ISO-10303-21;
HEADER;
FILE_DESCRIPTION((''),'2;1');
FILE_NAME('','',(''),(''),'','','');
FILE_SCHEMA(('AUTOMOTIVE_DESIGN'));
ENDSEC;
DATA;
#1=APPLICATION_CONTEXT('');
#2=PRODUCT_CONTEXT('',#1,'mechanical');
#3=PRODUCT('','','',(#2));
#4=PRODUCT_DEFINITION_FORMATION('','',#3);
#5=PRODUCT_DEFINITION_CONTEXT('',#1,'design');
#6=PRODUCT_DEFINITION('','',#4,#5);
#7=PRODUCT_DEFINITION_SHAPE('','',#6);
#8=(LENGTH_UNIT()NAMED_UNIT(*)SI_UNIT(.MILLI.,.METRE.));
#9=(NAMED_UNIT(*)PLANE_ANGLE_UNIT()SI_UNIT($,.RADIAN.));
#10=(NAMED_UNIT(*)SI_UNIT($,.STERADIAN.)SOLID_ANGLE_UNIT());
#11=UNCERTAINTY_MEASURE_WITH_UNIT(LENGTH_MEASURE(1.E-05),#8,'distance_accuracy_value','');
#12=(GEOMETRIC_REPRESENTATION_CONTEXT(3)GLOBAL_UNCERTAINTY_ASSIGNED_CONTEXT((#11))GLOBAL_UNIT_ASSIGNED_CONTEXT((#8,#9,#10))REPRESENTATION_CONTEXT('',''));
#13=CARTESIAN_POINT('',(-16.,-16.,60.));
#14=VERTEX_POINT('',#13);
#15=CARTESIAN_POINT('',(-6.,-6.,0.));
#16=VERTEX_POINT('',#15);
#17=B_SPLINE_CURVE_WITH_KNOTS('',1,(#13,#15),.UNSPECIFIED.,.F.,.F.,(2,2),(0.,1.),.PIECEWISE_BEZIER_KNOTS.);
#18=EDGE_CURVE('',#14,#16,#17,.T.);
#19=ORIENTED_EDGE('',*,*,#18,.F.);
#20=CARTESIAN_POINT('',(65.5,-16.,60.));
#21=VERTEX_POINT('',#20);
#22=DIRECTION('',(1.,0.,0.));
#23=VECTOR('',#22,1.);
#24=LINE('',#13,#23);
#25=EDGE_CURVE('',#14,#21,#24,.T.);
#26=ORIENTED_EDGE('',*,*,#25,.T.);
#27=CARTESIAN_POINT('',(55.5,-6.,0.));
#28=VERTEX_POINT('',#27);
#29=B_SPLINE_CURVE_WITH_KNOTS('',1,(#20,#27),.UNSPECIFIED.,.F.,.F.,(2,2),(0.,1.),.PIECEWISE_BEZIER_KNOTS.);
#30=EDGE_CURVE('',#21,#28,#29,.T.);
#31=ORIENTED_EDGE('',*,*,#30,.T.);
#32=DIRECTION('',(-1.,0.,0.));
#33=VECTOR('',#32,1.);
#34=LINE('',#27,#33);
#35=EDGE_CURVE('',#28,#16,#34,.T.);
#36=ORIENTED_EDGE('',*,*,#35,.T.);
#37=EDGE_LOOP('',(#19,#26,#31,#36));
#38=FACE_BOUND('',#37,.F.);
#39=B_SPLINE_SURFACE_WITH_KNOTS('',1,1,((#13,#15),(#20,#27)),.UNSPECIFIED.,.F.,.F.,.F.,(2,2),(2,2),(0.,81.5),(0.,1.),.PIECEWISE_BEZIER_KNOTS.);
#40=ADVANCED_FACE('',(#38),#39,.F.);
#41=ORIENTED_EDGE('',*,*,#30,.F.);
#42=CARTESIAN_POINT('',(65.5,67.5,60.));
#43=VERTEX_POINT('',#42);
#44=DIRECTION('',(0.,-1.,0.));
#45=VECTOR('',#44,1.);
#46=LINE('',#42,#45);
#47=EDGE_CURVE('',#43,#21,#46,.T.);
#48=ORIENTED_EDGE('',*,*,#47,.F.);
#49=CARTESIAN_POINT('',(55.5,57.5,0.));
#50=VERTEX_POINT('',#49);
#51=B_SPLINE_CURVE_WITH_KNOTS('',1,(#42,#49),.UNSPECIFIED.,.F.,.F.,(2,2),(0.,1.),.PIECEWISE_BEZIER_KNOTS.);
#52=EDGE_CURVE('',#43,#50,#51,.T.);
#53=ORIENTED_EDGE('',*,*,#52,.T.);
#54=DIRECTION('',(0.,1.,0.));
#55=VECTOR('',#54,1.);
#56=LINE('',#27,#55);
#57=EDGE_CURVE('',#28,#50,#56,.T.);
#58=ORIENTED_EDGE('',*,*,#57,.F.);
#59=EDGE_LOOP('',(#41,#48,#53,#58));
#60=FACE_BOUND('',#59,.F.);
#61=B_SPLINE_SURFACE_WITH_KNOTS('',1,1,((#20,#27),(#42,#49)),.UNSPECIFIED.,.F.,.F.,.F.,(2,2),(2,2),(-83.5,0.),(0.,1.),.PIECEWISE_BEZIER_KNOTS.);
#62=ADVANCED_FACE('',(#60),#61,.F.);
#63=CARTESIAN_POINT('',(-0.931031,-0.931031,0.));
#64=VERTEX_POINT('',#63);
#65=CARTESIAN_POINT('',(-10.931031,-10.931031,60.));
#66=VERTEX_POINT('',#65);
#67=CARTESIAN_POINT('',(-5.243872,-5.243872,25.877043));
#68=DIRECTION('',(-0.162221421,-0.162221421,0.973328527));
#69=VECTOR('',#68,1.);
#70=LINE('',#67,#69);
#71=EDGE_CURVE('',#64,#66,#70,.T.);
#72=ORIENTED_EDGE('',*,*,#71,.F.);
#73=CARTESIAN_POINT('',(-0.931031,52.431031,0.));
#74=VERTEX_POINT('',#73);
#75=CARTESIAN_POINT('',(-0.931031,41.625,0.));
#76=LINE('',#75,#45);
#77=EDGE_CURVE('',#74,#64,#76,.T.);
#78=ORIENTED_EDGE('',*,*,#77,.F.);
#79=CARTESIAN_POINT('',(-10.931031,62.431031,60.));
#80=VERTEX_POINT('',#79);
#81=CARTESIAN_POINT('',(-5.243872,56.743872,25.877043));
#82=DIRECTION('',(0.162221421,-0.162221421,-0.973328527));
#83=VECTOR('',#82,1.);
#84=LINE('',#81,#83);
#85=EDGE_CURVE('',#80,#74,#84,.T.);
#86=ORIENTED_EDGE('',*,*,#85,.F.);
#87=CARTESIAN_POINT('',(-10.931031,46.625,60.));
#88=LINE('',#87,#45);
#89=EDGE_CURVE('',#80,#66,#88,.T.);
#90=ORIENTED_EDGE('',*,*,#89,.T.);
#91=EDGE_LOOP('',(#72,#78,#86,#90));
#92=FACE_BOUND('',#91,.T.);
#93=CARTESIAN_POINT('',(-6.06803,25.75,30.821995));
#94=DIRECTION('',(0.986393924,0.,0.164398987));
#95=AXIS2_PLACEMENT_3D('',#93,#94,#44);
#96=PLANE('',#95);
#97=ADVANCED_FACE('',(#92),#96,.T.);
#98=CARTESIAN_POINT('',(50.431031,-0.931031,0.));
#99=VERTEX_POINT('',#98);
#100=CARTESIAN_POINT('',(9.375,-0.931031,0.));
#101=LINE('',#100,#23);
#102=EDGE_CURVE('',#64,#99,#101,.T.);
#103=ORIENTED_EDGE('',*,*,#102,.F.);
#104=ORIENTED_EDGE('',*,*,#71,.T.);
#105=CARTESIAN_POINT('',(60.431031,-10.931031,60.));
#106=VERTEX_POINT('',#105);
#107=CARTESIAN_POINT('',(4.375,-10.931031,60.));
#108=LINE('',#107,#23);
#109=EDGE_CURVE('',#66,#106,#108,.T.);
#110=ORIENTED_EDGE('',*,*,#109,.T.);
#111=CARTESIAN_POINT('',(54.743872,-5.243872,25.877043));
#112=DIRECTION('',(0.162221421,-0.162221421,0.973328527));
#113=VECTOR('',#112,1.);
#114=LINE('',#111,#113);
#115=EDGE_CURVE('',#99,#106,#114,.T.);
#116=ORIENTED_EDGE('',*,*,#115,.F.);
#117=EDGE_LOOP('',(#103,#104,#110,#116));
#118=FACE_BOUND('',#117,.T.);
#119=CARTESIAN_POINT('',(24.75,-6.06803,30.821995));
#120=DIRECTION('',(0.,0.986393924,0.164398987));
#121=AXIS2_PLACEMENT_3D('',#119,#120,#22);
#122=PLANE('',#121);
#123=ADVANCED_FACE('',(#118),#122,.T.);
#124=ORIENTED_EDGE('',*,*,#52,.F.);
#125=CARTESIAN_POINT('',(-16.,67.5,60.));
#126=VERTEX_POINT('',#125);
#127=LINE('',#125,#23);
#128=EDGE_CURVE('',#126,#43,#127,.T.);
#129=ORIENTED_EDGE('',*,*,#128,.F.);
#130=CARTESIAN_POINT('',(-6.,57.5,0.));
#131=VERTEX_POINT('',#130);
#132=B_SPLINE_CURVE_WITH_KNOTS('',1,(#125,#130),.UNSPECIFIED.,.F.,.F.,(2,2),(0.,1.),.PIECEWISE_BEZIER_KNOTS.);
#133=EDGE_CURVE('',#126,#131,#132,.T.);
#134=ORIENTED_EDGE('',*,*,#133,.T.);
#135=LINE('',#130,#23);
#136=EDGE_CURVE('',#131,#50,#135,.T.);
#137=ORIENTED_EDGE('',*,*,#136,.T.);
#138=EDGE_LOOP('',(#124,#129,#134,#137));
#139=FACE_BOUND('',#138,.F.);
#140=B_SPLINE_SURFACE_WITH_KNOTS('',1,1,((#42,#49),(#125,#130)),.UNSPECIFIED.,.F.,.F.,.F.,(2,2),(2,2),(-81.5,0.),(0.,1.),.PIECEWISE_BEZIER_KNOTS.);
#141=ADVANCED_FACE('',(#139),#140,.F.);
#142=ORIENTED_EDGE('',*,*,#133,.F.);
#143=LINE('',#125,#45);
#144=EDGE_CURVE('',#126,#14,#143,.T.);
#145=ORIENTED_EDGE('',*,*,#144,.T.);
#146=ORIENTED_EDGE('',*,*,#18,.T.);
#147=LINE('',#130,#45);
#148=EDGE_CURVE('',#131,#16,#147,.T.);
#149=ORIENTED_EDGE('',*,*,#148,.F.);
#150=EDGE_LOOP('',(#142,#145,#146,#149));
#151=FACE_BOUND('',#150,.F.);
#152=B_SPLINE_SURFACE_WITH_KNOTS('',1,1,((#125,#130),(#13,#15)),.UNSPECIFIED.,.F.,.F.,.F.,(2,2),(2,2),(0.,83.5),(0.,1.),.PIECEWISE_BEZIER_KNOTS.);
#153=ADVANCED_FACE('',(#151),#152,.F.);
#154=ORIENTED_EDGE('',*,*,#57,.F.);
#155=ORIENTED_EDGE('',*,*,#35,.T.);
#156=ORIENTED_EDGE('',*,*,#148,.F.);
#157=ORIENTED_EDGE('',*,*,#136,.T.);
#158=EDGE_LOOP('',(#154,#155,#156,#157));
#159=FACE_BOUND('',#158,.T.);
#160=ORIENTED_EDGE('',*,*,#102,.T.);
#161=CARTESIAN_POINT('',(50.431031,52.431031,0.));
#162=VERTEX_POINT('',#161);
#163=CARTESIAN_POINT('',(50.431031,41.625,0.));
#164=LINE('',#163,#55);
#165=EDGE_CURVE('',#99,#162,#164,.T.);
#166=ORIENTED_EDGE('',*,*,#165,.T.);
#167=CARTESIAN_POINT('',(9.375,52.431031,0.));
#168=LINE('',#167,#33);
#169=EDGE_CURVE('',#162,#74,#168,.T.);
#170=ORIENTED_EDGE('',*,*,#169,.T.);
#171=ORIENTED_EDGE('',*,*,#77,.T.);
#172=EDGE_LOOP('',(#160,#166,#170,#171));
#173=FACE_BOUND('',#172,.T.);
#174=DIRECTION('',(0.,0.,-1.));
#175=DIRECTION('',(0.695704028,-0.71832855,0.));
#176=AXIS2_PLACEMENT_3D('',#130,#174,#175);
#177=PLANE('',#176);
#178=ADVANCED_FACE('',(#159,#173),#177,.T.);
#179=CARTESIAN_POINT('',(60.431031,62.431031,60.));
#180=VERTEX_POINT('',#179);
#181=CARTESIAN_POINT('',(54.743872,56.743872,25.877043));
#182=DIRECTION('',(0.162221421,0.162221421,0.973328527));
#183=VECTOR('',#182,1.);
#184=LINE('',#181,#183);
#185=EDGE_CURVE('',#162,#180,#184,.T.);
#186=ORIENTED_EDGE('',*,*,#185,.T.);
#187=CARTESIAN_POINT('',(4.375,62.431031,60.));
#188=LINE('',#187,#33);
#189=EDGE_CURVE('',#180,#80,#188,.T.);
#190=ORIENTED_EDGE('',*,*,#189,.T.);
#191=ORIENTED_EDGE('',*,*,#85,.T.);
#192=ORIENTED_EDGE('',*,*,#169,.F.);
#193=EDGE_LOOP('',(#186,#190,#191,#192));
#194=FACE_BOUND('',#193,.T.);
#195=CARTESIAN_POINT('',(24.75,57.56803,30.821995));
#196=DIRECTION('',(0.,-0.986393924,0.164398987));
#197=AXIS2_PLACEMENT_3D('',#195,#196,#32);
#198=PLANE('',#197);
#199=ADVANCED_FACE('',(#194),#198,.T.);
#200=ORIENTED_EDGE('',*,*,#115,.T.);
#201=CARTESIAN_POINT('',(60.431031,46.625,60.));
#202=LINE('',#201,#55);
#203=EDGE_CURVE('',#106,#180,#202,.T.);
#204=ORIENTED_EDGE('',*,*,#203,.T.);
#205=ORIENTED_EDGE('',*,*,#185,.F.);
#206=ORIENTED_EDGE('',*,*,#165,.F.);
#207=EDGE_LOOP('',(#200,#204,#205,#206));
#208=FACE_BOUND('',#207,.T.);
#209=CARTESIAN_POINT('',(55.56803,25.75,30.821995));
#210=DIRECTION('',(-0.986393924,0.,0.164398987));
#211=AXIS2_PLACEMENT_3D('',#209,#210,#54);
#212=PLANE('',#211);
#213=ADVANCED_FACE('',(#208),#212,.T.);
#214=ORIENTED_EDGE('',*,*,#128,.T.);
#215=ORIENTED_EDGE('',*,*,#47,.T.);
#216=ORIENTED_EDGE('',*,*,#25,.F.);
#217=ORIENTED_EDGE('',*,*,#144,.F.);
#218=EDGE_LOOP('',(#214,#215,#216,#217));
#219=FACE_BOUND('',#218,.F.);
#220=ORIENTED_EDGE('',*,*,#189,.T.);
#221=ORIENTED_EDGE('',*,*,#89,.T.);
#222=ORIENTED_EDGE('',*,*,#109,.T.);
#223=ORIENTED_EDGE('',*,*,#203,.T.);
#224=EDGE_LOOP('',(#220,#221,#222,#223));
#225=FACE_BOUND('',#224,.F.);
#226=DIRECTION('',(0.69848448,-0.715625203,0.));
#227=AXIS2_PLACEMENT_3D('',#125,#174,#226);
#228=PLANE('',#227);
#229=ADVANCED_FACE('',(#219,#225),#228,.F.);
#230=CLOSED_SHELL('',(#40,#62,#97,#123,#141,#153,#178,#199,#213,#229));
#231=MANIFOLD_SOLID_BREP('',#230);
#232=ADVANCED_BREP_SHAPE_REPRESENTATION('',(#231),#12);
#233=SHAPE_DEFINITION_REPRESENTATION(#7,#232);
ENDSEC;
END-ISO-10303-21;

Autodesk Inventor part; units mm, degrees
ref_plane "YZ Plane" through (0, 0, 0) normal (1, 0, 0) x (0, 1, 0)
ref_plane "XZ Plane" through (0, 0, 0) normal (0, 1, 0) x (-1, 0, 0)
sketch "Sketch1" plane through (0, 0, 0) normal (0, 0, 1) x (1, 0, 0)
  line L0 (0, 0) -> (49.5, 0)
  line L1 (49.5, 0) -> (49.5, 51.5)
  line L2 (49.5, 51.5) -> (0, 51.5)
  line L3 (0, 51.5) -> (0, 0)
  line L4 (0, 51.5) -> (-6, 51.5)
  line L5 (-6, 51.5) -> (-6, 57.5)
  line L6 (49.5, 0) -> (55.5, 0)
  line L7 (55.5, 0) -> (55.5, -6)
  line L8 (-6, 57.5) -> (55.5, 57.5)
  line L9 (55.5, 57.5) -> (55.5, -6)
  line L10 (55.5, -6) -> (-6, -6)
  line L11 (-6, -6) -> (-6, 57.5)
  dimension "d0" = 49.5
  dimension "d1" = 51.5
  dimension "d2" = 6
  dimension "d3" = 6
  dimension "d4" = 6
  dimension "d5" = 6
ref_plane "Work Plane1" through (0, 0, 60) normal (0, 0, 1) x (1, 0, 0)
sketch "Sketch2" plane through (0, 0, 60) normal (0, 0, 1) x (1, 0, 0)
  line L0 (-6, 57.5) -> (55.5, 57.5) projected
  line L1 (-6, -6) -> (-6, 57.5) projected
  line L2 (55.5, -6) -> (-6, -6) projected
  line L3 (55.5, 0) -> (55.5, -6) projected
  line L4 (55.5, 57.5) -> (55.5, -6) projected
  line L5 (-6, 57.5) -> (-16, 57.5)
  line L6 (-16, 57.5) -> (-16, 67.5)
  line L7 (55.5, -6) -> (55.5, -16)
  line L8 (55.5, -16) -> (65.5, -16)
  line L9 (65.5, -16) -> (-16, -16)
  line L10 (-16, -16) -> (-16, 67.5)
  line L11 (-16, 67.5) -> (65.5, 67.5)
  line L12 (65.5, 67.5) -> (65.5, -16)
  point P0 (0, 0)
  point P1 (-6, 51.5)
  dimension "d7" = 10
  dimension "d8" = 10
  dimension "d9" = 10
  dimension "d10" = 10
loft "Loft1" add profiles "Sketch2", "Sketch1"
shell "Shell1" thickness 5 removed faces 2 at (11.1667, 11.8333, 60) at (14.5, 36.3333, 0)
properties part number "Antenna"
